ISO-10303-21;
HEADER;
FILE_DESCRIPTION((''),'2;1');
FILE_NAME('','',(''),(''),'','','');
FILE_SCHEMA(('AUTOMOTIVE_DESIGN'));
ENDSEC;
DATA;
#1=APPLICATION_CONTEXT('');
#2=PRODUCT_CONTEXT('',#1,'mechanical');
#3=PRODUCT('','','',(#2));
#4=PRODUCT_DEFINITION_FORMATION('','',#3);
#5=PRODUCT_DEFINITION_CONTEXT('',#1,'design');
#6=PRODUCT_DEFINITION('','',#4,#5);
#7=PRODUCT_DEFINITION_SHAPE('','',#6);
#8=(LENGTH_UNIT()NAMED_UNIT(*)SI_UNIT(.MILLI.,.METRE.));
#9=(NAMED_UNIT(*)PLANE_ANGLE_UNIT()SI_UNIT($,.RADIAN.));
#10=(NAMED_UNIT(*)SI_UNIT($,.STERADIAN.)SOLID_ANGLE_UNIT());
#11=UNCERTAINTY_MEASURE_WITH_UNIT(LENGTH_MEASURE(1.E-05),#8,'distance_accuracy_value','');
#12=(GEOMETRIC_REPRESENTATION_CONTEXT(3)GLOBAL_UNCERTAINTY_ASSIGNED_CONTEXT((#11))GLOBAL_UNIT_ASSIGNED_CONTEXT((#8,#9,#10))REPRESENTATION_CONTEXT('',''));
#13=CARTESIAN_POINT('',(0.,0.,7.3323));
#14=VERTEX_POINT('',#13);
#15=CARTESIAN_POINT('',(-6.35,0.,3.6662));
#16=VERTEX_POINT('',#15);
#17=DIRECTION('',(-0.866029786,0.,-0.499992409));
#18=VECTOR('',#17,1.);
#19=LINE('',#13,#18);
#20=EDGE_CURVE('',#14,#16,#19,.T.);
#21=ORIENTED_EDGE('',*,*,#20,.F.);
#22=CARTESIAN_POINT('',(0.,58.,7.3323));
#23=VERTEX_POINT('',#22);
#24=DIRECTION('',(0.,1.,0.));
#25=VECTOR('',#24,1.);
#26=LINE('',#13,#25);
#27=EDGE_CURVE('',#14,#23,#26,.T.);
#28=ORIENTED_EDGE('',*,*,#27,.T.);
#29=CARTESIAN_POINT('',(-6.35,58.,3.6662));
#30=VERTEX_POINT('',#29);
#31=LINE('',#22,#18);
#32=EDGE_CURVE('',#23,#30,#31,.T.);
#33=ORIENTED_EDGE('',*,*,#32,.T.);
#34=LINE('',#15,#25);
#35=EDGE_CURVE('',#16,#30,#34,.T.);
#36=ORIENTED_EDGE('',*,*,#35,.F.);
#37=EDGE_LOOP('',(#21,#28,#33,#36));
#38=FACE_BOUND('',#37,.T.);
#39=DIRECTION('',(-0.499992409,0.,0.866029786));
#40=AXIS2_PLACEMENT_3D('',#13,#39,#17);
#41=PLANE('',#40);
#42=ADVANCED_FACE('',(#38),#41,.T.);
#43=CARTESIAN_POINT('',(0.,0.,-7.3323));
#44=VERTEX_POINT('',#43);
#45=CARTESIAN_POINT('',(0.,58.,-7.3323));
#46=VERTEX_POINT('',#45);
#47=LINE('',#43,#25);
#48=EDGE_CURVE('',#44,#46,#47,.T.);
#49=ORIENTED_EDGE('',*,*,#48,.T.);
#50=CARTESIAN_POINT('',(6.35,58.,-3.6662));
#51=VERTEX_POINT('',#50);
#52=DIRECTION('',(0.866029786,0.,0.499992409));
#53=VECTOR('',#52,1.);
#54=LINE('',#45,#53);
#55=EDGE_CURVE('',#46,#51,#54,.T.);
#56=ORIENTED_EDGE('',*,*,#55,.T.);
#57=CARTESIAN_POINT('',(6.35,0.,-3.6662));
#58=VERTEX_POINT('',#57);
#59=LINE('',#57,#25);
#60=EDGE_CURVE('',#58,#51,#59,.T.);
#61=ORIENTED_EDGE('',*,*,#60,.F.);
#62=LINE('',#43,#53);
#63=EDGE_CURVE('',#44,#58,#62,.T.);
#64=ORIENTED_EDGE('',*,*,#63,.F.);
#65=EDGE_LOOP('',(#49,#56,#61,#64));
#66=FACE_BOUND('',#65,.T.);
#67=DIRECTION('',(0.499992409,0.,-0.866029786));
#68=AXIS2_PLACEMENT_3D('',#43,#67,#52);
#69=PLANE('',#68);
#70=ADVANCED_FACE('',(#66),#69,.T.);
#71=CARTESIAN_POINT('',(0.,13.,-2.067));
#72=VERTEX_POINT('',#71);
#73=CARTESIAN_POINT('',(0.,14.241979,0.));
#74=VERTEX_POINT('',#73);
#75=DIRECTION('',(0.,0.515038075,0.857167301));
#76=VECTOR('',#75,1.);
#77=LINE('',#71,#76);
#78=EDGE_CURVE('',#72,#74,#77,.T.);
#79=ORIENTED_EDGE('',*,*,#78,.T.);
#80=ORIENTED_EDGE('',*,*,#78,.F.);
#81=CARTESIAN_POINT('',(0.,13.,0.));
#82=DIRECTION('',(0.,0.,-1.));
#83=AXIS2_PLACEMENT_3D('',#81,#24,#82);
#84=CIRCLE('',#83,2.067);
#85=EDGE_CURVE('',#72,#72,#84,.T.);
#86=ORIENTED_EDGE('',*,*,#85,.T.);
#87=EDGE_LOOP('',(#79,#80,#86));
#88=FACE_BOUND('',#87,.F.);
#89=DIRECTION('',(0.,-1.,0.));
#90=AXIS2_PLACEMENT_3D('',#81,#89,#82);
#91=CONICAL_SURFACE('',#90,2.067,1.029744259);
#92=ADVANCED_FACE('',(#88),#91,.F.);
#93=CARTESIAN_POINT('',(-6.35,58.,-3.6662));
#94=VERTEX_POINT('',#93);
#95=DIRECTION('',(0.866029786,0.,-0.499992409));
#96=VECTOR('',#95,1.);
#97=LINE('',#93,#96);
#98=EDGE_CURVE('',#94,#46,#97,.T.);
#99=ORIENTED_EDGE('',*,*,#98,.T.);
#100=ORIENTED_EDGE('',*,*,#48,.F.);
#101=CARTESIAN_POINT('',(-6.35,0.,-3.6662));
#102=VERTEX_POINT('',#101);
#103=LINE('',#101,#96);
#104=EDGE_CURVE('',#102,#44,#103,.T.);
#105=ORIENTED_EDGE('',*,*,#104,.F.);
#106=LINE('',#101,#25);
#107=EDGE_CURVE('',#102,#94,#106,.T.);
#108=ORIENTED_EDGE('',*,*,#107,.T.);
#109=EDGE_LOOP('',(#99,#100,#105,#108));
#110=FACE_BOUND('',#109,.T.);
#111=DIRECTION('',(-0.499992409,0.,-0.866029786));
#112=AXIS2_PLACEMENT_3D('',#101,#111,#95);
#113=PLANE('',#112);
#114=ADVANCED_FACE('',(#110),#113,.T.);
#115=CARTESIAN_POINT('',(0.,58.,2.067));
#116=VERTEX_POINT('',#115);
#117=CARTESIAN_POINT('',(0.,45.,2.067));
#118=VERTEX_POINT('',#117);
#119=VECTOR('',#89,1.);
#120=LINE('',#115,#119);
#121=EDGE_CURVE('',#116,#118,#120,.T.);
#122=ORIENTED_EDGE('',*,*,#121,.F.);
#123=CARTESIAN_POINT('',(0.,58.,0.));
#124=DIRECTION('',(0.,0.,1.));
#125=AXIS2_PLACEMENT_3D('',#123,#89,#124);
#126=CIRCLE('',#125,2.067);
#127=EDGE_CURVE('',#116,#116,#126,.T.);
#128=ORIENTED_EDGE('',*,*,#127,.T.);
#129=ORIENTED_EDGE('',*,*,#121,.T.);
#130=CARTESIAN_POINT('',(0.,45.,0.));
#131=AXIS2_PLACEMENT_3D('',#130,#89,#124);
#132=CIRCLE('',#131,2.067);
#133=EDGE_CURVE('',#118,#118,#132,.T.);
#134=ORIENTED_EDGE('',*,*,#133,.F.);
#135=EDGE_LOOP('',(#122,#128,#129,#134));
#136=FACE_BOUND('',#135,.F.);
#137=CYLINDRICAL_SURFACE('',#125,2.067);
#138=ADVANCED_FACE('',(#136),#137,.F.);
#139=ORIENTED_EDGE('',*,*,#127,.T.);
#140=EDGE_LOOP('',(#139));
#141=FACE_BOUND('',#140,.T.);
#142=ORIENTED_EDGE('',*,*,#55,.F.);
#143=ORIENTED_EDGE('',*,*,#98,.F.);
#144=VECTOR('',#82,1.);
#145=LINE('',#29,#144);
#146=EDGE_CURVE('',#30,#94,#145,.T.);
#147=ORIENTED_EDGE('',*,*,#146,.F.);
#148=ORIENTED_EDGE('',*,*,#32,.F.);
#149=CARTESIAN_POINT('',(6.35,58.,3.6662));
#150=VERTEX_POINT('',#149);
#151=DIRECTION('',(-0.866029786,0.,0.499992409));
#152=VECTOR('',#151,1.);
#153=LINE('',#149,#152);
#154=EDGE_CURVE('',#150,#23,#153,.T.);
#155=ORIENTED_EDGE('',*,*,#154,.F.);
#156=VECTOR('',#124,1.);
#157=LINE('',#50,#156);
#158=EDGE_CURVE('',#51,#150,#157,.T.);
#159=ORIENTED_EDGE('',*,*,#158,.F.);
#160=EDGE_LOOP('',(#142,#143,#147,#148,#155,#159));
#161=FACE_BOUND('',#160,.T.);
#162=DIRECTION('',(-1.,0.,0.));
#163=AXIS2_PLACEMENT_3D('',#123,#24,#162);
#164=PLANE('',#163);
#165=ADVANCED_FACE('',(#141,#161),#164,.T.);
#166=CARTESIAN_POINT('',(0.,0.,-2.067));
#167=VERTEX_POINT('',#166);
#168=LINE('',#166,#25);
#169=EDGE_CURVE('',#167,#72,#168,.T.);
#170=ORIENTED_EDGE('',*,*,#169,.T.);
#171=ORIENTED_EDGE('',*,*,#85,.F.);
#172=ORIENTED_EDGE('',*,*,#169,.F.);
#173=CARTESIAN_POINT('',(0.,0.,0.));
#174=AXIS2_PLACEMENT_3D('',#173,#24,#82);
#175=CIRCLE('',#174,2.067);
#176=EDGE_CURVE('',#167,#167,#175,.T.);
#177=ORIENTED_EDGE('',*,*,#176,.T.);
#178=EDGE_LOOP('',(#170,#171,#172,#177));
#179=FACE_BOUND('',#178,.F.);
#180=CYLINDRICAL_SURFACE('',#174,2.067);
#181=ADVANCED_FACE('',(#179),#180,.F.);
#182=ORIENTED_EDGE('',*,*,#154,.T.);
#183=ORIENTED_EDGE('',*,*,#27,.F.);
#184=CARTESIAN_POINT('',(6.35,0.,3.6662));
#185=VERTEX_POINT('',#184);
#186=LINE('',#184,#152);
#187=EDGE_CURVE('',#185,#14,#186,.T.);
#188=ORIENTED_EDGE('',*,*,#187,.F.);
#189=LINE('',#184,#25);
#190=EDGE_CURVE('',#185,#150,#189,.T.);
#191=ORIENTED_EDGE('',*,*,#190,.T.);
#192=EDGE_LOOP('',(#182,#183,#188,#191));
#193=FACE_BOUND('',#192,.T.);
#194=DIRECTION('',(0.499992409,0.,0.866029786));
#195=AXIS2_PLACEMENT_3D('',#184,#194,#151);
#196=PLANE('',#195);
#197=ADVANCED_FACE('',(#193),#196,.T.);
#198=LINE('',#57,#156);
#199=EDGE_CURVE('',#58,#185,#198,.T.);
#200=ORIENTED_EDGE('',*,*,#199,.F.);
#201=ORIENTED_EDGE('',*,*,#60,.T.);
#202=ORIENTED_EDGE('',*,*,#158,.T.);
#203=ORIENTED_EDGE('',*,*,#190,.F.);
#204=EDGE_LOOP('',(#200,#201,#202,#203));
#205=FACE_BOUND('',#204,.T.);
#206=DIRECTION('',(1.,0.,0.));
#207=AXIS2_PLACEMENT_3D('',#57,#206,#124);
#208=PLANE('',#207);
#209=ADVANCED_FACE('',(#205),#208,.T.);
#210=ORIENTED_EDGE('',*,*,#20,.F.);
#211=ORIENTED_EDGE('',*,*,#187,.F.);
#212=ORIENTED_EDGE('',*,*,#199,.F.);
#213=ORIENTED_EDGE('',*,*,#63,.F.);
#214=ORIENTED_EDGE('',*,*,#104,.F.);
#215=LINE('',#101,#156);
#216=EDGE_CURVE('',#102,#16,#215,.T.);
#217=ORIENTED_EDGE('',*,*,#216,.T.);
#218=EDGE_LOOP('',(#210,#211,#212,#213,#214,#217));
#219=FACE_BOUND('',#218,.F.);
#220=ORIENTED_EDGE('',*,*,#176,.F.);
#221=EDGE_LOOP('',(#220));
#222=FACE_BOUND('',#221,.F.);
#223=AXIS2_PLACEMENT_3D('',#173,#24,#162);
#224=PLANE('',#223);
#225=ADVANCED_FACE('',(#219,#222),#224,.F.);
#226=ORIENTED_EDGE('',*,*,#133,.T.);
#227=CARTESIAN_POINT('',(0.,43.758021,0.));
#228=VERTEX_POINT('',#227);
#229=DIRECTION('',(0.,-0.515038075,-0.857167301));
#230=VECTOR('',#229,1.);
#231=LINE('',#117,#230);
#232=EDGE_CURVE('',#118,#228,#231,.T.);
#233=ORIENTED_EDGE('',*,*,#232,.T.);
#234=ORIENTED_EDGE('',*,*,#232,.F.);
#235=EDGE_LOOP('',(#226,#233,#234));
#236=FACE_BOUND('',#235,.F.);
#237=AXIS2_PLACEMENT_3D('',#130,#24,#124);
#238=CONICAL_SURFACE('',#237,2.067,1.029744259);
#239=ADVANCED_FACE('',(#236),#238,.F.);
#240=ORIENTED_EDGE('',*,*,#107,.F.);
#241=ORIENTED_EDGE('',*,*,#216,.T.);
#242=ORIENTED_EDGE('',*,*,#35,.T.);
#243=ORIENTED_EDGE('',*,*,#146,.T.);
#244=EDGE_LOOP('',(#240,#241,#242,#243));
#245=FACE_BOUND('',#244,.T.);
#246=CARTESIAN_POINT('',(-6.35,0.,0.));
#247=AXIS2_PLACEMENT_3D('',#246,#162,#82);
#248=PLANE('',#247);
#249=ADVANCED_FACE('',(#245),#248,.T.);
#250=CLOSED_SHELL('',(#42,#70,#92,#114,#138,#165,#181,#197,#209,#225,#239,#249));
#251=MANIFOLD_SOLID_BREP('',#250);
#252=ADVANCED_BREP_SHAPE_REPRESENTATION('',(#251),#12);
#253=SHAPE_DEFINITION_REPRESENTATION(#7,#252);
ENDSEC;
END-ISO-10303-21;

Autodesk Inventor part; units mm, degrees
ref_plane "YZ Plane" through (0, 0, 0) normal (1, 0, 0) x (0, 1, 0)
ref_plane "XZ Plane" through (0, 0, 0) normal (0, 1, 0) x (-1, 0, 0)
ref_plane "XY Plane" through (0, 0, 0) normal (0, 0, 1) x (1, 0, 0)
sketch "Sketch1" plane through (0, 0, 0) normal (0, 1, 0) x (-1, 0, 0)
  line L0 (0, 0) -> (6.35, 0)
  line L1 (6.35, -3.6662) -> (0, -7.3323)
  line L2 (0, -7.3323) -> (-6.35, -3.6662)
  line L3 (-6.35, -3.6662) -> (-6.35, 3.6662)
  line L4 (-6.35, 3.6662) -> (0, 7.3323)
  line L5 (0, 7.3323) -> (6.35, 3.6662)
  line L6 (6.35, 3.6662) -> (6.35, -3.6662)
  dimension "d0" = 6.35
extrude "Extrusion1" add sketch "Sketch1" along normal blind 58
sketch "Sketch3" plane through (0, 58, 0) normal (0, 1, 0) x (1, 0, 0)
  point P0 (0, 0)
  point P1 (0, 0)
hole "Hole1" at (0, 58, 0) direction (0, -1, 0) diameter 4.134 depth 13 tip angle 118 thread size "M5x0.8" class "6H" standard "ANSI Metric M Profile"
sketch "Sketch4" plane through (0, 0, 0) normal (0, -1, 0) x (1, 0, 0)
  point P0 (0, 0)
  point P1 (0, 0)
hole "Hole2" at (0, 0, 0) direction (0, 1, 0) diameter 4.134 depth 13 tip angle 118 thread size "M5x0.8" class "6H" standard "ANSI Metric M Profile"
properties part number "HexShaft"
